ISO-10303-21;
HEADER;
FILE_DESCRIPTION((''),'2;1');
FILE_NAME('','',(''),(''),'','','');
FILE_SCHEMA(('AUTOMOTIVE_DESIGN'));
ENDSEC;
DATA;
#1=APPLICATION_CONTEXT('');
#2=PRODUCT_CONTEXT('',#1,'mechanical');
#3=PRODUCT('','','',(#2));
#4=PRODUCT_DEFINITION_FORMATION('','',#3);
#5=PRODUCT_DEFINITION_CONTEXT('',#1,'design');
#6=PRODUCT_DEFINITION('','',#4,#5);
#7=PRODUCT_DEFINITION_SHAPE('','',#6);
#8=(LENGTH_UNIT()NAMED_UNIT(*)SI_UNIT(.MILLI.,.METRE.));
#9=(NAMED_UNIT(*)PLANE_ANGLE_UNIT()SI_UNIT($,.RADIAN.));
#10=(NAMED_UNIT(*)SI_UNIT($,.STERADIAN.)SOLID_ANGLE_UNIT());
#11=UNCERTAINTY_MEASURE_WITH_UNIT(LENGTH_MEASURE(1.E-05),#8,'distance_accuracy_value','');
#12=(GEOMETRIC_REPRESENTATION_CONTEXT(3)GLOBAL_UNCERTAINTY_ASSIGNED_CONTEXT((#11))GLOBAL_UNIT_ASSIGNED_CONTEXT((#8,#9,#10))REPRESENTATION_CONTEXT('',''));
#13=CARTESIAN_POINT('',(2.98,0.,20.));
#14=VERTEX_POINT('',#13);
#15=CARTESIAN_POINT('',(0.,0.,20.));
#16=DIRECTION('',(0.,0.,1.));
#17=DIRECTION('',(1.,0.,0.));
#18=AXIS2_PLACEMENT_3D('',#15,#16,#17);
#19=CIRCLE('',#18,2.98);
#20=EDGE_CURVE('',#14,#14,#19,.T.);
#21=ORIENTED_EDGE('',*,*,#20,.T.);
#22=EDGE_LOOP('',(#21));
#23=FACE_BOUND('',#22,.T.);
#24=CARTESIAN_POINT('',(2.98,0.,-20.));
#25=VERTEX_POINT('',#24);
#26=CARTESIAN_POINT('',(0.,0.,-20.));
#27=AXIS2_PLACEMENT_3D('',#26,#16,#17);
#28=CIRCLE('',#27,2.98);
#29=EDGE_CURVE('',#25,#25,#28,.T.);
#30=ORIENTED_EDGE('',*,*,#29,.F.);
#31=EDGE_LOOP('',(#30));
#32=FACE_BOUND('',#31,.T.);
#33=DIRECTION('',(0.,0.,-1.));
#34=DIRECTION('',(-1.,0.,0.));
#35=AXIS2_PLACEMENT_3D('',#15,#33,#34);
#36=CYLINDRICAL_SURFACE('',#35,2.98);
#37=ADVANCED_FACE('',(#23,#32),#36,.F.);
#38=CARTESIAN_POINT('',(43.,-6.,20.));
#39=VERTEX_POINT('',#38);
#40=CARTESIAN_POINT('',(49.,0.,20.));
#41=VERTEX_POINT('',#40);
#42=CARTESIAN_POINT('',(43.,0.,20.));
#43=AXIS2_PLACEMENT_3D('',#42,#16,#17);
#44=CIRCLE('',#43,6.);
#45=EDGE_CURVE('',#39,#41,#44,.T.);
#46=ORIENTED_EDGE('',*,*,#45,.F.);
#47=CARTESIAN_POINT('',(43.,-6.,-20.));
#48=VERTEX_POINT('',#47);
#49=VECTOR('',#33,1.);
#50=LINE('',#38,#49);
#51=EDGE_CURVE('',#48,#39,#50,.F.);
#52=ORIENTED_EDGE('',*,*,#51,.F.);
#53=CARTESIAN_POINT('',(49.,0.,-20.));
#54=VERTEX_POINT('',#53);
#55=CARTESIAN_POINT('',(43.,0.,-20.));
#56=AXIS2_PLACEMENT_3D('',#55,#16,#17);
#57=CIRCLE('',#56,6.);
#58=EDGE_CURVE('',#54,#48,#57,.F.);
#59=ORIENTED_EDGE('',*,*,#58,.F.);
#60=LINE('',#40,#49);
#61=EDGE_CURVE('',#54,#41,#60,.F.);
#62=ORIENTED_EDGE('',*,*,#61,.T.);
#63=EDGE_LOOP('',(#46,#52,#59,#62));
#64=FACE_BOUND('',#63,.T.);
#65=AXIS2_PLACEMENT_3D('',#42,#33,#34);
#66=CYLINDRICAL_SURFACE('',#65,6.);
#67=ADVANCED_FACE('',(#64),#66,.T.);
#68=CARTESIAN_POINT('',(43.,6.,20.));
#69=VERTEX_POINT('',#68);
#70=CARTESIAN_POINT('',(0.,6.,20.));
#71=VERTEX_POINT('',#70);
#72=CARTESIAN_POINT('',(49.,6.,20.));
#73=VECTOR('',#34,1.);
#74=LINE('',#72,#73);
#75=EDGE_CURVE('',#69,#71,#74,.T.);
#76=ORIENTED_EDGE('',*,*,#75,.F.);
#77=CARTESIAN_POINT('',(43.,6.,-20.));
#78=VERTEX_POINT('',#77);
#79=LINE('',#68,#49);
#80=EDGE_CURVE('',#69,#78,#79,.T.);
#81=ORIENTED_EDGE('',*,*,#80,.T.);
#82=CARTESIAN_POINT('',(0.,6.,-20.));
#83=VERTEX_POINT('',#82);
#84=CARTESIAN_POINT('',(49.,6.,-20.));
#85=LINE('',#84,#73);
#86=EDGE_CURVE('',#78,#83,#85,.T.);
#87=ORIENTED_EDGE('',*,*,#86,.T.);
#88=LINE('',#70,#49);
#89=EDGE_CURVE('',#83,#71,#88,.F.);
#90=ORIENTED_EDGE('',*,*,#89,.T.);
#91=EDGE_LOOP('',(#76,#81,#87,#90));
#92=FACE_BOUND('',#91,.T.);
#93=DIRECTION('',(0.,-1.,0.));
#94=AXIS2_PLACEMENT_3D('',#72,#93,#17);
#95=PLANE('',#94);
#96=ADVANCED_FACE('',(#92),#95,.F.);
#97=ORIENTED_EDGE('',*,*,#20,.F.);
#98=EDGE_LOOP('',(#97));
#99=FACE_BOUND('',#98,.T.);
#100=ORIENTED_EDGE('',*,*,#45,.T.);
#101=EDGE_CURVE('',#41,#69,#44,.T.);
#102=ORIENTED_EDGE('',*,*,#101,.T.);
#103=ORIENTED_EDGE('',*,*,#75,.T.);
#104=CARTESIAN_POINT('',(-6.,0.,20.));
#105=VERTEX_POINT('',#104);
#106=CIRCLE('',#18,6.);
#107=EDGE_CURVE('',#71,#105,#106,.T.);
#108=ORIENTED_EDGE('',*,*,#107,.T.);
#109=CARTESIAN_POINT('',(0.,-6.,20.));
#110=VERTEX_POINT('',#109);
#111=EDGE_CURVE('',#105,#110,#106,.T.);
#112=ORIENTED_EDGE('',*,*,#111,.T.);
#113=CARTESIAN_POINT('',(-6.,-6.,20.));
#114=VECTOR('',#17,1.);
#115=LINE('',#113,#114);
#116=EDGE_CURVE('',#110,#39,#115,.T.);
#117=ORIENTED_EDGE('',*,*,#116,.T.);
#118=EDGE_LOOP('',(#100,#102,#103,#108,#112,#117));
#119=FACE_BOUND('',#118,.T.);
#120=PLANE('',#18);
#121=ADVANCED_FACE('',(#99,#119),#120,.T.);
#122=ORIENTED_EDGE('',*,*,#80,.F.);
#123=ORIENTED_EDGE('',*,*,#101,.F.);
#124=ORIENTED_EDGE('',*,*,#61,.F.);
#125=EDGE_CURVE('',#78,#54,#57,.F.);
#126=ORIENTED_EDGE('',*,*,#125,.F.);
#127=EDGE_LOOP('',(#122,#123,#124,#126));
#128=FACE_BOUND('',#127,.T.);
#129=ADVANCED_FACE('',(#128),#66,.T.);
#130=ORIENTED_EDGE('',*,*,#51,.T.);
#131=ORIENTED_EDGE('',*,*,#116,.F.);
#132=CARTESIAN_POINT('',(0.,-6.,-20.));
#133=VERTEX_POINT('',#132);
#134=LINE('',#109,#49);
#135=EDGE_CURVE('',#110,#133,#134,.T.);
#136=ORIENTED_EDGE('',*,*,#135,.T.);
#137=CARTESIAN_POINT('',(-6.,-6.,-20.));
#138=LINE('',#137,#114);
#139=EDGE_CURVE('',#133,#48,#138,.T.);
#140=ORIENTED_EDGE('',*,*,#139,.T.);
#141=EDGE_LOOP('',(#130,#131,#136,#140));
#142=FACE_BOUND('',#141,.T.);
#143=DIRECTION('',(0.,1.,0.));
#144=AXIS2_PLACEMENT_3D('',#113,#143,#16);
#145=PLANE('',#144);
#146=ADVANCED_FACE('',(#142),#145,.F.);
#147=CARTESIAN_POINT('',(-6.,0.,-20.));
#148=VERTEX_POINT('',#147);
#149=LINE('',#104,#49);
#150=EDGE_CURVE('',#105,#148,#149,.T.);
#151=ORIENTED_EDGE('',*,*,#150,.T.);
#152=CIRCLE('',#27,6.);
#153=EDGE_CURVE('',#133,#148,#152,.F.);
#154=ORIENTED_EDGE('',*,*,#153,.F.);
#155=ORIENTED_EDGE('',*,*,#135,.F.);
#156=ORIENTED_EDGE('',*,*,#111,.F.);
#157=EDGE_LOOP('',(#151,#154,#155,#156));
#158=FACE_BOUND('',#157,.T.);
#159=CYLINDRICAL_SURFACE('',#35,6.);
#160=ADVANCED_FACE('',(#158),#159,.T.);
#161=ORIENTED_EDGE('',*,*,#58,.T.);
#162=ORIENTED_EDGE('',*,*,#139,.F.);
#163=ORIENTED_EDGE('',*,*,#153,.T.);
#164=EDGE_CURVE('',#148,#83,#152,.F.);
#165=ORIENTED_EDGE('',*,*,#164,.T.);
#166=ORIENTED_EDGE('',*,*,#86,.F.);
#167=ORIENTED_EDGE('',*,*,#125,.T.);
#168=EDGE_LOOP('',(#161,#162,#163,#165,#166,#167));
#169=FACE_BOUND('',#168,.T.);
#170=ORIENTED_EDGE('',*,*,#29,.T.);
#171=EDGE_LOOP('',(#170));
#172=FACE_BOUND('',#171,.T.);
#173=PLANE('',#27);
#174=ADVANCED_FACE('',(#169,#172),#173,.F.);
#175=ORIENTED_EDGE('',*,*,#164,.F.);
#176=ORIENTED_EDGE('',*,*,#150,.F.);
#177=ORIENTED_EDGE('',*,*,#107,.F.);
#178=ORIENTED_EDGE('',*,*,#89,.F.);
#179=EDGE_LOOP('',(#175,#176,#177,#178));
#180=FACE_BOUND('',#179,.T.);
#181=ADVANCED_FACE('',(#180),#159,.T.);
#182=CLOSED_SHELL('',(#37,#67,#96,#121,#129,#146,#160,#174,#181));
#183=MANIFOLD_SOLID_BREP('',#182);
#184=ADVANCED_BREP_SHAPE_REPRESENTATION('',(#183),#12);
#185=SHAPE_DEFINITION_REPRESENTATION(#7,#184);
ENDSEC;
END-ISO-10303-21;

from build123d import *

# Parameters (mm, degrees)
SKETCH1_W           = 55
SKETCH1_H           = 12
SKETCH1_R           = 2.98
BOSS_EXTRUDE1_DEPTH = 20
FILLET2_R           = 6


with BuildPart() as part:
    # Sketch1 → Boss-Extrude1 (new, symmetric)
    with BuildSketch(Plane.XY):
        with Locations((21.5, 0)):
            Rectangle(SKETCH1_W, SKETCH1_H)
        Circle(SKETCH1_R, mode=Mode.SUBTRACT)
    extrude(amount=BOSS_EXTRUDE1_DEPTH, both=True)

    # Fillet2
    fillet2_edges = [part.edges().sort_by_distance(p)[0] for p in [
        (49, -6, 0),
        (49, 6, 0),
        (-6, -6, 0),
        (-6, 6, 0),
    ]]
    fillet(fillet2_edges, radius=FILLET2_R - 0.0001)  # a hair under: the kernel refuses the full size


solid = part.part
